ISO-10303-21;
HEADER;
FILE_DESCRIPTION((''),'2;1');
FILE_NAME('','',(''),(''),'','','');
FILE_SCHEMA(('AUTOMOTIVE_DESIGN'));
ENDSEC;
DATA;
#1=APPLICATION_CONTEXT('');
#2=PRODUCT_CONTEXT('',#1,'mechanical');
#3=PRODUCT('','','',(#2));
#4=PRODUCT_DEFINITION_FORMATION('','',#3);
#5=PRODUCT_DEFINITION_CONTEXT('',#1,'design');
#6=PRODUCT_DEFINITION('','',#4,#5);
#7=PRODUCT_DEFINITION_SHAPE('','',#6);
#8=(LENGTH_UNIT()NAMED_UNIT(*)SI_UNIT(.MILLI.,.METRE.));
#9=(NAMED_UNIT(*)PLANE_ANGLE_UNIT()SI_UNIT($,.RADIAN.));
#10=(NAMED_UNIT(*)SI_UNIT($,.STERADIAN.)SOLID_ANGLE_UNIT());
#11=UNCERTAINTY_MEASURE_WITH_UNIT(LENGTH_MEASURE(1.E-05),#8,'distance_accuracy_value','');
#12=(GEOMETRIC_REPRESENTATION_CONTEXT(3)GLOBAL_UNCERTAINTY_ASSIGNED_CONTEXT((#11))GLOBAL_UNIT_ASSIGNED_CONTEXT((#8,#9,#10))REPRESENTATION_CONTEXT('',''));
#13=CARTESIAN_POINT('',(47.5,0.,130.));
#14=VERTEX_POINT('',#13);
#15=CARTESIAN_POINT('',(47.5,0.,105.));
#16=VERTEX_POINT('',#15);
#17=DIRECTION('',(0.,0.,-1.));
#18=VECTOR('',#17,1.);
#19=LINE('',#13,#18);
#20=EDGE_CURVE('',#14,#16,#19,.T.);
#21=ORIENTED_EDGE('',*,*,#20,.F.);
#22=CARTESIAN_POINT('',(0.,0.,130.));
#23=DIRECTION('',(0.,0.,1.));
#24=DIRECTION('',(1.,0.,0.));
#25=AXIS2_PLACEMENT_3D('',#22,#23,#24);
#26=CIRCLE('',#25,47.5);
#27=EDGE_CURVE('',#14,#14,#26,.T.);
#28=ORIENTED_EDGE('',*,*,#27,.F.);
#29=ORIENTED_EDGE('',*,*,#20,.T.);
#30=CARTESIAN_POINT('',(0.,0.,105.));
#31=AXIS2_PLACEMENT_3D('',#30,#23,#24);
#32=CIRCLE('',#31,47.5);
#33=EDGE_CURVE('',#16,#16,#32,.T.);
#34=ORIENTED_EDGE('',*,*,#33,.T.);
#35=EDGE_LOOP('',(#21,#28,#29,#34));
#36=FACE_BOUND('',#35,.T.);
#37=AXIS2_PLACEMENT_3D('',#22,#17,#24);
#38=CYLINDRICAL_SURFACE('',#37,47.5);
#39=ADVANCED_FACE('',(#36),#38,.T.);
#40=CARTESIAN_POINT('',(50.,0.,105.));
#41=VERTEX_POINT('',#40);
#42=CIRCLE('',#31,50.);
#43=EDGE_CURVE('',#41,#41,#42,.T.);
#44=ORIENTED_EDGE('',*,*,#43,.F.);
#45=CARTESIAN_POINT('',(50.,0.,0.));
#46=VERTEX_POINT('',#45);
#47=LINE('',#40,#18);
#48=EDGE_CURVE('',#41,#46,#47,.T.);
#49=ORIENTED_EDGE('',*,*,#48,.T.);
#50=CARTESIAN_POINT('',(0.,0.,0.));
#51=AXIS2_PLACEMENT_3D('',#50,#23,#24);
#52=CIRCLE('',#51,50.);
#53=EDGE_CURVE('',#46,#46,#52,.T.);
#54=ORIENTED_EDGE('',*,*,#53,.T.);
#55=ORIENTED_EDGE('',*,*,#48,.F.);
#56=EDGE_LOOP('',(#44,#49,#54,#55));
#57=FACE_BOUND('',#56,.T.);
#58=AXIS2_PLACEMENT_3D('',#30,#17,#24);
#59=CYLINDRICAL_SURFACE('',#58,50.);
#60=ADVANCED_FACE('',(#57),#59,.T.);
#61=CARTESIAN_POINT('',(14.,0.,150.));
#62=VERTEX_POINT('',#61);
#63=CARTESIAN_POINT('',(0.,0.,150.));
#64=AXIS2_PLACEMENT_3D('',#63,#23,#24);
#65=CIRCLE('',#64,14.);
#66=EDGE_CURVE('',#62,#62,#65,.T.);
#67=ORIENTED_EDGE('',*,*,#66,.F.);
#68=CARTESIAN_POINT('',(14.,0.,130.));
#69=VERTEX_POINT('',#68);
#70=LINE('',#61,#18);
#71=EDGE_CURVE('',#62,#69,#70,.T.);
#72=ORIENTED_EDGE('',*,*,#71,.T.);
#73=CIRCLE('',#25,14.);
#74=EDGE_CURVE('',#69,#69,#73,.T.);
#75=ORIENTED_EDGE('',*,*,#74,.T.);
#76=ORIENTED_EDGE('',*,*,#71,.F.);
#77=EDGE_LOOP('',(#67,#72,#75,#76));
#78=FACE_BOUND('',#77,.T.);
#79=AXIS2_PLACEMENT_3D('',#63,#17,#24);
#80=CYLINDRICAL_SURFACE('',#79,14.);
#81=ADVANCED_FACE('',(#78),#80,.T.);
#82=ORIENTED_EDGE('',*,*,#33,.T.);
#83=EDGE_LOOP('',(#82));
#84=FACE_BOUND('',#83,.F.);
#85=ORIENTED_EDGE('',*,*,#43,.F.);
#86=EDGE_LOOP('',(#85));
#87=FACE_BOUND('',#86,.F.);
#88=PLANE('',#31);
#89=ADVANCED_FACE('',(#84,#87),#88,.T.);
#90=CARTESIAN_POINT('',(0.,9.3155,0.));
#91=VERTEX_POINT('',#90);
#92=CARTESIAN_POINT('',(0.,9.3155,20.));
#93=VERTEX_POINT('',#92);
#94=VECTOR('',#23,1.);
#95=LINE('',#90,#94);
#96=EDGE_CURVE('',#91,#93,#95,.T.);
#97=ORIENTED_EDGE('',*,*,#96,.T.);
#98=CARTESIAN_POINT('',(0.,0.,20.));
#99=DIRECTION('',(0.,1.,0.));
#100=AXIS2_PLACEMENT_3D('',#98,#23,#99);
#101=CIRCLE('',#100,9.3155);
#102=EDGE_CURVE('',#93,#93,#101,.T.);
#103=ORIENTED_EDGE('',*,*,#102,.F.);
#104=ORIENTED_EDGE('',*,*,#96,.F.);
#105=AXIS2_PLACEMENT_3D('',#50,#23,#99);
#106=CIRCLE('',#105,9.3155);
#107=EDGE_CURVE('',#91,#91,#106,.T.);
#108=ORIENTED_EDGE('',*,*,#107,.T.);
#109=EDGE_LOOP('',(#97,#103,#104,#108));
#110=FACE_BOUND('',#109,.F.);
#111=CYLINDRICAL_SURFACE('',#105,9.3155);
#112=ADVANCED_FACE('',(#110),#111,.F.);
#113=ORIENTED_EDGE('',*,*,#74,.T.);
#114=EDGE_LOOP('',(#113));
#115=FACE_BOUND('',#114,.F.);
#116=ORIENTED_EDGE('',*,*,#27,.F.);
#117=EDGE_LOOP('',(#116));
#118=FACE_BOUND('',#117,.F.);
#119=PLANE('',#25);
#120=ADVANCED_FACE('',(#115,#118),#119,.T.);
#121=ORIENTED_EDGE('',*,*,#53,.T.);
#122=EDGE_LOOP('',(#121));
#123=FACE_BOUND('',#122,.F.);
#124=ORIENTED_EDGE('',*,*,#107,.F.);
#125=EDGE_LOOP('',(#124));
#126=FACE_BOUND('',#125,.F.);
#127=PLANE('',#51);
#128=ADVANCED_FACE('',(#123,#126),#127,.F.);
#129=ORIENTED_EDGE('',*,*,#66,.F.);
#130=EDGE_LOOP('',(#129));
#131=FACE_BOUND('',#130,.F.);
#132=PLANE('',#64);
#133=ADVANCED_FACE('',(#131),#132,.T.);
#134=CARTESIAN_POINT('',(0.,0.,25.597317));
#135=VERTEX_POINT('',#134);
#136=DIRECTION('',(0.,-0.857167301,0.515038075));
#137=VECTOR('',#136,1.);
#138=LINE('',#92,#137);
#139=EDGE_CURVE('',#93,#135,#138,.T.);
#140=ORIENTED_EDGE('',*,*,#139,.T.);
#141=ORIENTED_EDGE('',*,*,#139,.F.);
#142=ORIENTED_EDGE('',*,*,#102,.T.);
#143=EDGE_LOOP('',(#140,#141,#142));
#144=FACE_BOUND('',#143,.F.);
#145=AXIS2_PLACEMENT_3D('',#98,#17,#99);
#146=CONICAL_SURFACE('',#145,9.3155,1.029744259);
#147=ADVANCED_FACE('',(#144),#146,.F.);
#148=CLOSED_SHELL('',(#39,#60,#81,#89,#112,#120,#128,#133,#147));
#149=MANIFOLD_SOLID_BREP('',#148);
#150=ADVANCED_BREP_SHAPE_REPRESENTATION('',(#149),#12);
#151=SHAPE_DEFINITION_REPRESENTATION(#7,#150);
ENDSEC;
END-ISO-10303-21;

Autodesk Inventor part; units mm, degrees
ref_plane "YZ Plane" through (0, 0, 0) normal (1, 0, 0) x (0, 1, 0)
ref_plane "XZ Plane" through (0, 0, 0) normal (0, 1, 0) x (-1, 0, 0)
ref_plane "XY Plane" through (0, 0, 0) normal (0, 0, 1) x (1, 0, 0)
sketch "Sketch1" plane through (0, 0, 0) normal (0, 1, 0) x (-1, 0, 0)
  line L0 (0, 0) -> (0, 150)
  line L1 (0, 150) -> (-14, 150)
  line L2 (-14, 150) -> (-14, 130)
  line L3 (-14, 130) -> (-47.5, 130)
  line L4 (-47.5, 130) -> (-47.5, 105)
  line L5 (-47.5, 105) -> (-50, 105)
  line L6 (-50, 105) -> (-50, 0)
  line L7 (-50, 0) -> (0, 0)
  dimension "d0" = 20
  dimension "d1" = 130
  dimension "d2" = 95
  dimension "d3" = 100
  dimension "d4" = 25
  dimension "d5" = 28
revolve "Revolution1" add sketch "Sketch1" angle 360 about axis through (0, 0, 0) along (0, 0, 1)
sketch "Sketch2" plane through (0, 0, 0) normal (0, 0, -1) x (-1, 0, 0)
  point P0 (0, 0)
hole "Hole1" at (0, 0, 0) direction (0, 0, 1) diameter 18.631 depth 20 tip angle 118 thread size "G20.955x1.814" designation "G 1/2" standard "ISO Pipe Threads"
properties part number "Pulse compensator"
